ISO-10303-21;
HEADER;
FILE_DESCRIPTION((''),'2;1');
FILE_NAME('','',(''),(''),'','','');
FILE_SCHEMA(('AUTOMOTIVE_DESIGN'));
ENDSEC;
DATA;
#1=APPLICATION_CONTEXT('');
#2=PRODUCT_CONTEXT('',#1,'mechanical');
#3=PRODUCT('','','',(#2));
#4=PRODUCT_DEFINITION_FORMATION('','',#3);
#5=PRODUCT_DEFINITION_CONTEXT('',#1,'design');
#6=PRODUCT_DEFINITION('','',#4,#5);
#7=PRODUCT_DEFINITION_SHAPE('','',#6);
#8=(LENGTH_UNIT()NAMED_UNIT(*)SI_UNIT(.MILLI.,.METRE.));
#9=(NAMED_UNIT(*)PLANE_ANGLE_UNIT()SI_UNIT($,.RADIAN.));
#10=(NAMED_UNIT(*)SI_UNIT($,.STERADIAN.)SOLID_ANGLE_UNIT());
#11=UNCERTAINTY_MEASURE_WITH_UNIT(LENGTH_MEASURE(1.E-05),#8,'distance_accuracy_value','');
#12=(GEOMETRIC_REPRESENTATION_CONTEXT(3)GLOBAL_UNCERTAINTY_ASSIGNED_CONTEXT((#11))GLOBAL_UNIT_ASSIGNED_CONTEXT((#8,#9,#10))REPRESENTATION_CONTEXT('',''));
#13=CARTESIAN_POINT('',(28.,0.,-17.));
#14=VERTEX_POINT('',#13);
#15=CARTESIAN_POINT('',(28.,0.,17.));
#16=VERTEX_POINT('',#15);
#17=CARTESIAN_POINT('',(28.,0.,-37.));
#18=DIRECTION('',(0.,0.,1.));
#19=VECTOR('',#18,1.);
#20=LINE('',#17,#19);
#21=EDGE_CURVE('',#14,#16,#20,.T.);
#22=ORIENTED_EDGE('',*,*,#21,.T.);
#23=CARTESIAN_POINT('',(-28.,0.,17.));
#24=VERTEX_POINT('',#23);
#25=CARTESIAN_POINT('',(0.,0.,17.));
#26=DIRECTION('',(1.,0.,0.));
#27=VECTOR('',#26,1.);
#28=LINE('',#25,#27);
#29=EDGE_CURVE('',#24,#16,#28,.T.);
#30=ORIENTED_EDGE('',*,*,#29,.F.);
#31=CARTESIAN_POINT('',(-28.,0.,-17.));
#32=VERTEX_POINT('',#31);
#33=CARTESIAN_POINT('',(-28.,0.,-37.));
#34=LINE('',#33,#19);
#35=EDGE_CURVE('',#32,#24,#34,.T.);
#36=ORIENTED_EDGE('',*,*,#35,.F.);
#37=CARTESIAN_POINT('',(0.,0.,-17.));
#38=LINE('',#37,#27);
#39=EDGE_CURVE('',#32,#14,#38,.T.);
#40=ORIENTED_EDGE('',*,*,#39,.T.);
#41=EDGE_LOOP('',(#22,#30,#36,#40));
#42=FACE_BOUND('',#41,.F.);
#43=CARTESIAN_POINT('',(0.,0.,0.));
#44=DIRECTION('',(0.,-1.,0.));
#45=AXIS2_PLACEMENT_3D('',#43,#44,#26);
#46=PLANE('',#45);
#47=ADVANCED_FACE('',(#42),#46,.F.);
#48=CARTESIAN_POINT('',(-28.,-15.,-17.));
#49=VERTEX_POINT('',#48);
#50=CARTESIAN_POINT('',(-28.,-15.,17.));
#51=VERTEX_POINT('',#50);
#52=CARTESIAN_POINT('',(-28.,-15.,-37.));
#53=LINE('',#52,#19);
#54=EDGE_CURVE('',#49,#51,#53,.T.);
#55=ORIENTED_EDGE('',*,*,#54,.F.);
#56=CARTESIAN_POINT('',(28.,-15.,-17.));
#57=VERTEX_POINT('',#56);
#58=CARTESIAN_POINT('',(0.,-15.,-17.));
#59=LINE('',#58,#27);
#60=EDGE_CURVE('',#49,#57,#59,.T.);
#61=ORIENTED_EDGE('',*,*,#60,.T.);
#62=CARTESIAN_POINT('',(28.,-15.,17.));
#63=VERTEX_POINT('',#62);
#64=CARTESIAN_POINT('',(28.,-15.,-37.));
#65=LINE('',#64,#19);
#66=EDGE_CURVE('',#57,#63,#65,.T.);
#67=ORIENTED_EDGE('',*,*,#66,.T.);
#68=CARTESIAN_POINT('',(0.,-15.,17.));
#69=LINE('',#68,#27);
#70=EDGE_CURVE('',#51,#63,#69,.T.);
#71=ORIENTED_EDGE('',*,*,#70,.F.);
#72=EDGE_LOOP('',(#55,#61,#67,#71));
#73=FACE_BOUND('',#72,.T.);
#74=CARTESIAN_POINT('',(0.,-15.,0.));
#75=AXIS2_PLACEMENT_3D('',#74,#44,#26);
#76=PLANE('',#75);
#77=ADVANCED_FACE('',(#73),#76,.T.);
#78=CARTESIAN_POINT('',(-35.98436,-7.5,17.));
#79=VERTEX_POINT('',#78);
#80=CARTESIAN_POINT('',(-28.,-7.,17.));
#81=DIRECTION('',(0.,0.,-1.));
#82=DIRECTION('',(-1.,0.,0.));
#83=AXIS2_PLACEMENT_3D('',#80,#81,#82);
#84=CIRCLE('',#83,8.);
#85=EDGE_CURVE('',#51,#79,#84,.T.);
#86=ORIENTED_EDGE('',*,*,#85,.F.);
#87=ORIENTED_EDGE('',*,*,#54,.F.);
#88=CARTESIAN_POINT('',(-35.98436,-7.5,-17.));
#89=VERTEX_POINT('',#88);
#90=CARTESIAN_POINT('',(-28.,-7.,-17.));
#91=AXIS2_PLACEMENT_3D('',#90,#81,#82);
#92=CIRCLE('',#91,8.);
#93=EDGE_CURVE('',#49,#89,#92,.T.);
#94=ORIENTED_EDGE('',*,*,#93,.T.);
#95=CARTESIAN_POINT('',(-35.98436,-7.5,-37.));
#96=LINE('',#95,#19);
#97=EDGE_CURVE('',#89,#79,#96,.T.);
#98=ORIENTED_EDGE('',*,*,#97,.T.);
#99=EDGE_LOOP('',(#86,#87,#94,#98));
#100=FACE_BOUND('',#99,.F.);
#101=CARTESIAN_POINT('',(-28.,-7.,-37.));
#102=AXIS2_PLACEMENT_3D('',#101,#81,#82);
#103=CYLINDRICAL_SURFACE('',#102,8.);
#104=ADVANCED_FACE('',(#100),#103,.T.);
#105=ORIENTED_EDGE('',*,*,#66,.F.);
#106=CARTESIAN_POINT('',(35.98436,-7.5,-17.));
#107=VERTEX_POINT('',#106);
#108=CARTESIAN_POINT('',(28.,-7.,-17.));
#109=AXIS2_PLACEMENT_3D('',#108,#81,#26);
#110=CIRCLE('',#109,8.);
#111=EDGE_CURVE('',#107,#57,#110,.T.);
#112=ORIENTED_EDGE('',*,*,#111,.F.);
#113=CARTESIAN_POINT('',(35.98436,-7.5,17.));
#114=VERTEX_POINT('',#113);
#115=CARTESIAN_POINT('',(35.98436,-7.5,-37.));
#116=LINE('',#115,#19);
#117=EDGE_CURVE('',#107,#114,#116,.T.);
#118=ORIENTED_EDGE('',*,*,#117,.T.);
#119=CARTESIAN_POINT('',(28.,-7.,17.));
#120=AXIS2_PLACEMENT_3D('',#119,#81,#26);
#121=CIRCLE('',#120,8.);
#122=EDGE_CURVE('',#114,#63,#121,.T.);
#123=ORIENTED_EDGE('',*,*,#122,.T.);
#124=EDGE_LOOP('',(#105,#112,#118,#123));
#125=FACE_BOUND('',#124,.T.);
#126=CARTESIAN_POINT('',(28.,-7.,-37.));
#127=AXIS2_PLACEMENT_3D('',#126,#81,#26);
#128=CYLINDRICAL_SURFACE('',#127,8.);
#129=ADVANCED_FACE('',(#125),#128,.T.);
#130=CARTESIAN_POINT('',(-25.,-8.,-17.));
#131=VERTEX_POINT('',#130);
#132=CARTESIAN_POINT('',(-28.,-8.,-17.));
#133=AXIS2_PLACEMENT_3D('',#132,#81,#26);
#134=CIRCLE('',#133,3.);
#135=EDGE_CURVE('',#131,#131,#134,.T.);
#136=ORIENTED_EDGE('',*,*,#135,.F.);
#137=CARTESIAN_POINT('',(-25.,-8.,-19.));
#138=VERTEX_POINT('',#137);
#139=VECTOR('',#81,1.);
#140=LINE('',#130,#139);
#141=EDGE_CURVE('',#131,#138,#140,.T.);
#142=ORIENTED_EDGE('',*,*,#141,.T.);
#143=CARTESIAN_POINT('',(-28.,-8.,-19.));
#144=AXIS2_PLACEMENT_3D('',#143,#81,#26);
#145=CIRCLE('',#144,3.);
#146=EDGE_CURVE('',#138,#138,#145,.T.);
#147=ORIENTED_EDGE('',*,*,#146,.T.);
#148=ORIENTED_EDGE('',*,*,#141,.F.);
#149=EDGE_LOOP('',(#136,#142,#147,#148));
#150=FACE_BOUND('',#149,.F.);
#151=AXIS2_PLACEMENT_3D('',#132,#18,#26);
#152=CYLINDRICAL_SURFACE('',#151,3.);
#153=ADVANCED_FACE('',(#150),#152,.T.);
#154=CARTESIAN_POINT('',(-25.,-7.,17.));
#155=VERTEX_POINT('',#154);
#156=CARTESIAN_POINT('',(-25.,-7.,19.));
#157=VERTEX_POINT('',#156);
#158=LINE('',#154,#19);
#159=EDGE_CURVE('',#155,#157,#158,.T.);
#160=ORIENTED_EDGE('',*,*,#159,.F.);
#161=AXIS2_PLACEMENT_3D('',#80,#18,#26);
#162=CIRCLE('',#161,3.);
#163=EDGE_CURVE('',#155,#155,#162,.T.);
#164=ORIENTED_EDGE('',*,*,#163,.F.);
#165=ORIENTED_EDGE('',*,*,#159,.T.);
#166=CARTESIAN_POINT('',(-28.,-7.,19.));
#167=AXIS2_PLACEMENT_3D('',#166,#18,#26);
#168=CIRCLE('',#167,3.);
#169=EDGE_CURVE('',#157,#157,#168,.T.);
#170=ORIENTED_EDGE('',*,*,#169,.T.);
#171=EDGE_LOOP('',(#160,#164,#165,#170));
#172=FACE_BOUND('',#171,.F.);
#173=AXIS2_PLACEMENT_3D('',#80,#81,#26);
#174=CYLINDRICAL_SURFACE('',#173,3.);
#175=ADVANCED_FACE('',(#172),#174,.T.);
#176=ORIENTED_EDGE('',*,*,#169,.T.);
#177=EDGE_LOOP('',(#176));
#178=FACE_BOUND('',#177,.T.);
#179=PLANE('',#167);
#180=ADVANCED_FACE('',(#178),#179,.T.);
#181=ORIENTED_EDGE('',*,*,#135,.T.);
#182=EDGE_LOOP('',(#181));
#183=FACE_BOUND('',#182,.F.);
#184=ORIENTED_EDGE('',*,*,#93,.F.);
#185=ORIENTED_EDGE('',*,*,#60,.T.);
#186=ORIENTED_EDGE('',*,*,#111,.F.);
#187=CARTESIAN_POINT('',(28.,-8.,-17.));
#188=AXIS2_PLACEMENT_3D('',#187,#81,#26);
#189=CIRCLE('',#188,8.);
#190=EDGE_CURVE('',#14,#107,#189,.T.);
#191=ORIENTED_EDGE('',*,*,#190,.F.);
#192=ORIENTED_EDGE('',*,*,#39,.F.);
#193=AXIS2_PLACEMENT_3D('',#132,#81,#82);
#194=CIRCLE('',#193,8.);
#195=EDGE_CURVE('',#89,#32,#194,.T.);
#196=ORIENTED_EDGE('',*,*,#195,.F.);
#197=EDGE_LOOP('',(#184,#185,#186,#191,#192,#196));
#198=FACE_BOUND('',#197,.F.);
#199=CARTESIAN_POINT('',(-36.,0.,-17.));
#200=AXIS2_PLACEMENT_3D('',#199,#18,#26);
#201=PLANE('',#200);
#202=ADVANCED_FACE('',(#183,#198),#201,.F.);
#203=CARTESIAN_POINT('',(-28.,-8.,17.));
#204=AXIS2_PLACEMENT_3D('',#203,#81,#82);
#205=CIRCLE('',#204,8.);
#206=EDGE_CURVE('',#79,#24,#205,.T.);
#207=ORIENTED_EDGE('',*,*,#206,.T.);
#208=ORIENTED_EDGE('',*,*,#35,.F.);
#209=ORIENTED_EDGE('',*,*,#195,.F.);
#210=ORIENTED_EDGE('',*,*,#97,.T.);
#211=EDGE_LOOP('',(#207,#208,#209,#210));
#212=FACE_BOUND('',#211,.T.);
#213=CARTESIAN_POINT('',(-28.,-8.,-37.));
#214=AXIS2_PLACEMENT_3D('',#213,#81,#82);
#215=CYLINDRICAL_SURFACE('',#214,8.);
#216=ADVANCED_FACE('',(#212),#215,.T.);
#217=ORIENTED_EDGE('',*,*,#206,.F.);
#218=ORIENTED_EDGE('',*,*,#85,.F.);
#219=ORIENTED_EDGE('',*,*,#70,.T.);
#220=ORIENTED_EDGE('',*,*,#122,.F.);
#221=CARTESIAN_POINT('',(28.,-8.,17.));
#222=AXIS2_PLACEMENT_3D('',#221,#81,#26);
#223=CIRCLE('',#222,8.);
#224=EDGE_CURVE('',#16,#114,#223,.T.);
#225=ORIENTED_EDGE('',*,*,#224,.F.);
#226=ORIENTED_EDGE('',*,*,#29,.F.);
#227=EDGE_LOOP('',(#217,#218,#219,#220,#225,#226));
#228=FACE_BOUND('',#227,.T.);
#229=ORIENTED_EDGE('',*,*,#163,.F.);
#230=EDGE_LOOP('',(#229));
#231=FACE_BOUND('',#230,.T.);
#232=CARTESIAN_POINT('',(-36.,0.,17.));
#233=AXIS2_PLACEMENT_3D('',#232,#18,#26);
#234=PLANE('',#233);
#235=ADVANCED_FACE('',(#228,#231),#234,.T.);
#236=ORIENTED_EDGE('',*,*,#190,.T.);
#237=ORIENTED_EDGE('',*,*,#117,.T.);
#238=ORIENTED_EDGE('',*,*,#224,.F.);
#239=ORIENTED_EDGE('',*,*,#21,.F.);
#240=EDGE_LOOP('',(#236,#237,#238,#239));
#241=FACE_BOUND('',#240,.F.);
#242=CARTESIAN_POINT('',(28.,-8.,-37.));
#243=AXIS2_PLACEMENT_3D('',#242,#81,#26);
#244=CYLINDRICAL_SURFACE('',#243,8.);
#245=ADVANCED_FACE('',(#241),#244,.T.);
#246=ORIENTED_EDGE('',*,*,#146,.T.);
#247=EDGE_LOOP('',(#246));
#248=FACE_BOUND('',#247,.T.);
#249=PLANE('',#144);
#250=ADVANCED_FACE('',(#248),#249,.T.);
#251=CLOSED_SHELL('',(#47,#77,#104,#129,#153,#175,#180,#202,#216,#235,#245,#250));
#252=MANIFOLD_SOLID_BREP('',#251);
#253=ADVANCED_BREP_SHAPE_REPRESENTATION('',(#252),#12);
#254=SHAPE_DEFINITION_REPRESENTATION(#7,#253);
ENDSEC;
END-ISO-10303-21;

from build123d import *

# Parameters (mm, degrees)
F0_W        = 72
F0_H        = 34
F1_DEPTH    = 15
F2_T1_DEPTH = 74
F3_R        = 3
F4_DEPTH    = 2
F5_R        = 3
F6_DEPTH    = 2


# Not quite as in the source:
# - a fillet or chamfer that OpenCascade refuses, or shapes differently, is made with other operations: its cross-section is extruded or revolved along the edge and cut away or added


with BuildPart() as f1:
    # F0 (on Front) → F1 (new body)
    with BuildSketch(Plane.XZ):
        Rectangle(F0_W, F0_H)
    extrude(amount=F1_DEPTH)

    # F2: fillet of radius 8 on 4 edges, made by hand

    # F2_s2 → F2_t1 (cut)
    with BuildSketch(Plane.XY.offset(-37)):
        with BuildLine():
            ThreePointArc((-36, -8), (-33.6568542495, -2.3431457505), (-28, 0))
            Line((-28, 0), (-36, 0))
            Line((-36, 0), (-36, -8))
        make_face()
        with BuildLine():
            ThreePointArc((-36, -7), (-33.6568542495, -12.6568542495), (-28, -15))
            Line((-28, -15), (-36, -15))
            Line((-36, -15), (-36, -7))
        make_face()
        with BuildLine():
            ThreePointArc((36, -7), (33.6568542495, -12.6568542495), (28, -15))
            Line((28, -15), (36, -15))
            Line((36, -15), (36, -7))
        make_face()
        with BuildLine():
            ThreePointArc((36, -8), (33.6568542495, -2.3431457505), (28, 0))
            Line((28, 0), (36, 0))
            Line((36, 0), (36, -8))
        make_face()
    extrude(amount=F2_T1_DEPTH, mode=Mode.SUBTRACT)

    # F3 (on face) → F4 (join)
    with BuildSketch(Plane.XY.offset(17)):
        with Locations((-28, -7)):
            Circle(F3_R)
    extrude(amount=F4_DEPTH)

    # F5 (on face) → F6 (join)
    with BuildSketch(Plane(origin=(0, 0, -17), x_dir=(1, 0, 0), z_dir=(0, 0, -1))):
        with Locations((-28, 8)):
            Circle(F5_R)
    extrude(amount=F6_DEPTH)


solid = f1.part
